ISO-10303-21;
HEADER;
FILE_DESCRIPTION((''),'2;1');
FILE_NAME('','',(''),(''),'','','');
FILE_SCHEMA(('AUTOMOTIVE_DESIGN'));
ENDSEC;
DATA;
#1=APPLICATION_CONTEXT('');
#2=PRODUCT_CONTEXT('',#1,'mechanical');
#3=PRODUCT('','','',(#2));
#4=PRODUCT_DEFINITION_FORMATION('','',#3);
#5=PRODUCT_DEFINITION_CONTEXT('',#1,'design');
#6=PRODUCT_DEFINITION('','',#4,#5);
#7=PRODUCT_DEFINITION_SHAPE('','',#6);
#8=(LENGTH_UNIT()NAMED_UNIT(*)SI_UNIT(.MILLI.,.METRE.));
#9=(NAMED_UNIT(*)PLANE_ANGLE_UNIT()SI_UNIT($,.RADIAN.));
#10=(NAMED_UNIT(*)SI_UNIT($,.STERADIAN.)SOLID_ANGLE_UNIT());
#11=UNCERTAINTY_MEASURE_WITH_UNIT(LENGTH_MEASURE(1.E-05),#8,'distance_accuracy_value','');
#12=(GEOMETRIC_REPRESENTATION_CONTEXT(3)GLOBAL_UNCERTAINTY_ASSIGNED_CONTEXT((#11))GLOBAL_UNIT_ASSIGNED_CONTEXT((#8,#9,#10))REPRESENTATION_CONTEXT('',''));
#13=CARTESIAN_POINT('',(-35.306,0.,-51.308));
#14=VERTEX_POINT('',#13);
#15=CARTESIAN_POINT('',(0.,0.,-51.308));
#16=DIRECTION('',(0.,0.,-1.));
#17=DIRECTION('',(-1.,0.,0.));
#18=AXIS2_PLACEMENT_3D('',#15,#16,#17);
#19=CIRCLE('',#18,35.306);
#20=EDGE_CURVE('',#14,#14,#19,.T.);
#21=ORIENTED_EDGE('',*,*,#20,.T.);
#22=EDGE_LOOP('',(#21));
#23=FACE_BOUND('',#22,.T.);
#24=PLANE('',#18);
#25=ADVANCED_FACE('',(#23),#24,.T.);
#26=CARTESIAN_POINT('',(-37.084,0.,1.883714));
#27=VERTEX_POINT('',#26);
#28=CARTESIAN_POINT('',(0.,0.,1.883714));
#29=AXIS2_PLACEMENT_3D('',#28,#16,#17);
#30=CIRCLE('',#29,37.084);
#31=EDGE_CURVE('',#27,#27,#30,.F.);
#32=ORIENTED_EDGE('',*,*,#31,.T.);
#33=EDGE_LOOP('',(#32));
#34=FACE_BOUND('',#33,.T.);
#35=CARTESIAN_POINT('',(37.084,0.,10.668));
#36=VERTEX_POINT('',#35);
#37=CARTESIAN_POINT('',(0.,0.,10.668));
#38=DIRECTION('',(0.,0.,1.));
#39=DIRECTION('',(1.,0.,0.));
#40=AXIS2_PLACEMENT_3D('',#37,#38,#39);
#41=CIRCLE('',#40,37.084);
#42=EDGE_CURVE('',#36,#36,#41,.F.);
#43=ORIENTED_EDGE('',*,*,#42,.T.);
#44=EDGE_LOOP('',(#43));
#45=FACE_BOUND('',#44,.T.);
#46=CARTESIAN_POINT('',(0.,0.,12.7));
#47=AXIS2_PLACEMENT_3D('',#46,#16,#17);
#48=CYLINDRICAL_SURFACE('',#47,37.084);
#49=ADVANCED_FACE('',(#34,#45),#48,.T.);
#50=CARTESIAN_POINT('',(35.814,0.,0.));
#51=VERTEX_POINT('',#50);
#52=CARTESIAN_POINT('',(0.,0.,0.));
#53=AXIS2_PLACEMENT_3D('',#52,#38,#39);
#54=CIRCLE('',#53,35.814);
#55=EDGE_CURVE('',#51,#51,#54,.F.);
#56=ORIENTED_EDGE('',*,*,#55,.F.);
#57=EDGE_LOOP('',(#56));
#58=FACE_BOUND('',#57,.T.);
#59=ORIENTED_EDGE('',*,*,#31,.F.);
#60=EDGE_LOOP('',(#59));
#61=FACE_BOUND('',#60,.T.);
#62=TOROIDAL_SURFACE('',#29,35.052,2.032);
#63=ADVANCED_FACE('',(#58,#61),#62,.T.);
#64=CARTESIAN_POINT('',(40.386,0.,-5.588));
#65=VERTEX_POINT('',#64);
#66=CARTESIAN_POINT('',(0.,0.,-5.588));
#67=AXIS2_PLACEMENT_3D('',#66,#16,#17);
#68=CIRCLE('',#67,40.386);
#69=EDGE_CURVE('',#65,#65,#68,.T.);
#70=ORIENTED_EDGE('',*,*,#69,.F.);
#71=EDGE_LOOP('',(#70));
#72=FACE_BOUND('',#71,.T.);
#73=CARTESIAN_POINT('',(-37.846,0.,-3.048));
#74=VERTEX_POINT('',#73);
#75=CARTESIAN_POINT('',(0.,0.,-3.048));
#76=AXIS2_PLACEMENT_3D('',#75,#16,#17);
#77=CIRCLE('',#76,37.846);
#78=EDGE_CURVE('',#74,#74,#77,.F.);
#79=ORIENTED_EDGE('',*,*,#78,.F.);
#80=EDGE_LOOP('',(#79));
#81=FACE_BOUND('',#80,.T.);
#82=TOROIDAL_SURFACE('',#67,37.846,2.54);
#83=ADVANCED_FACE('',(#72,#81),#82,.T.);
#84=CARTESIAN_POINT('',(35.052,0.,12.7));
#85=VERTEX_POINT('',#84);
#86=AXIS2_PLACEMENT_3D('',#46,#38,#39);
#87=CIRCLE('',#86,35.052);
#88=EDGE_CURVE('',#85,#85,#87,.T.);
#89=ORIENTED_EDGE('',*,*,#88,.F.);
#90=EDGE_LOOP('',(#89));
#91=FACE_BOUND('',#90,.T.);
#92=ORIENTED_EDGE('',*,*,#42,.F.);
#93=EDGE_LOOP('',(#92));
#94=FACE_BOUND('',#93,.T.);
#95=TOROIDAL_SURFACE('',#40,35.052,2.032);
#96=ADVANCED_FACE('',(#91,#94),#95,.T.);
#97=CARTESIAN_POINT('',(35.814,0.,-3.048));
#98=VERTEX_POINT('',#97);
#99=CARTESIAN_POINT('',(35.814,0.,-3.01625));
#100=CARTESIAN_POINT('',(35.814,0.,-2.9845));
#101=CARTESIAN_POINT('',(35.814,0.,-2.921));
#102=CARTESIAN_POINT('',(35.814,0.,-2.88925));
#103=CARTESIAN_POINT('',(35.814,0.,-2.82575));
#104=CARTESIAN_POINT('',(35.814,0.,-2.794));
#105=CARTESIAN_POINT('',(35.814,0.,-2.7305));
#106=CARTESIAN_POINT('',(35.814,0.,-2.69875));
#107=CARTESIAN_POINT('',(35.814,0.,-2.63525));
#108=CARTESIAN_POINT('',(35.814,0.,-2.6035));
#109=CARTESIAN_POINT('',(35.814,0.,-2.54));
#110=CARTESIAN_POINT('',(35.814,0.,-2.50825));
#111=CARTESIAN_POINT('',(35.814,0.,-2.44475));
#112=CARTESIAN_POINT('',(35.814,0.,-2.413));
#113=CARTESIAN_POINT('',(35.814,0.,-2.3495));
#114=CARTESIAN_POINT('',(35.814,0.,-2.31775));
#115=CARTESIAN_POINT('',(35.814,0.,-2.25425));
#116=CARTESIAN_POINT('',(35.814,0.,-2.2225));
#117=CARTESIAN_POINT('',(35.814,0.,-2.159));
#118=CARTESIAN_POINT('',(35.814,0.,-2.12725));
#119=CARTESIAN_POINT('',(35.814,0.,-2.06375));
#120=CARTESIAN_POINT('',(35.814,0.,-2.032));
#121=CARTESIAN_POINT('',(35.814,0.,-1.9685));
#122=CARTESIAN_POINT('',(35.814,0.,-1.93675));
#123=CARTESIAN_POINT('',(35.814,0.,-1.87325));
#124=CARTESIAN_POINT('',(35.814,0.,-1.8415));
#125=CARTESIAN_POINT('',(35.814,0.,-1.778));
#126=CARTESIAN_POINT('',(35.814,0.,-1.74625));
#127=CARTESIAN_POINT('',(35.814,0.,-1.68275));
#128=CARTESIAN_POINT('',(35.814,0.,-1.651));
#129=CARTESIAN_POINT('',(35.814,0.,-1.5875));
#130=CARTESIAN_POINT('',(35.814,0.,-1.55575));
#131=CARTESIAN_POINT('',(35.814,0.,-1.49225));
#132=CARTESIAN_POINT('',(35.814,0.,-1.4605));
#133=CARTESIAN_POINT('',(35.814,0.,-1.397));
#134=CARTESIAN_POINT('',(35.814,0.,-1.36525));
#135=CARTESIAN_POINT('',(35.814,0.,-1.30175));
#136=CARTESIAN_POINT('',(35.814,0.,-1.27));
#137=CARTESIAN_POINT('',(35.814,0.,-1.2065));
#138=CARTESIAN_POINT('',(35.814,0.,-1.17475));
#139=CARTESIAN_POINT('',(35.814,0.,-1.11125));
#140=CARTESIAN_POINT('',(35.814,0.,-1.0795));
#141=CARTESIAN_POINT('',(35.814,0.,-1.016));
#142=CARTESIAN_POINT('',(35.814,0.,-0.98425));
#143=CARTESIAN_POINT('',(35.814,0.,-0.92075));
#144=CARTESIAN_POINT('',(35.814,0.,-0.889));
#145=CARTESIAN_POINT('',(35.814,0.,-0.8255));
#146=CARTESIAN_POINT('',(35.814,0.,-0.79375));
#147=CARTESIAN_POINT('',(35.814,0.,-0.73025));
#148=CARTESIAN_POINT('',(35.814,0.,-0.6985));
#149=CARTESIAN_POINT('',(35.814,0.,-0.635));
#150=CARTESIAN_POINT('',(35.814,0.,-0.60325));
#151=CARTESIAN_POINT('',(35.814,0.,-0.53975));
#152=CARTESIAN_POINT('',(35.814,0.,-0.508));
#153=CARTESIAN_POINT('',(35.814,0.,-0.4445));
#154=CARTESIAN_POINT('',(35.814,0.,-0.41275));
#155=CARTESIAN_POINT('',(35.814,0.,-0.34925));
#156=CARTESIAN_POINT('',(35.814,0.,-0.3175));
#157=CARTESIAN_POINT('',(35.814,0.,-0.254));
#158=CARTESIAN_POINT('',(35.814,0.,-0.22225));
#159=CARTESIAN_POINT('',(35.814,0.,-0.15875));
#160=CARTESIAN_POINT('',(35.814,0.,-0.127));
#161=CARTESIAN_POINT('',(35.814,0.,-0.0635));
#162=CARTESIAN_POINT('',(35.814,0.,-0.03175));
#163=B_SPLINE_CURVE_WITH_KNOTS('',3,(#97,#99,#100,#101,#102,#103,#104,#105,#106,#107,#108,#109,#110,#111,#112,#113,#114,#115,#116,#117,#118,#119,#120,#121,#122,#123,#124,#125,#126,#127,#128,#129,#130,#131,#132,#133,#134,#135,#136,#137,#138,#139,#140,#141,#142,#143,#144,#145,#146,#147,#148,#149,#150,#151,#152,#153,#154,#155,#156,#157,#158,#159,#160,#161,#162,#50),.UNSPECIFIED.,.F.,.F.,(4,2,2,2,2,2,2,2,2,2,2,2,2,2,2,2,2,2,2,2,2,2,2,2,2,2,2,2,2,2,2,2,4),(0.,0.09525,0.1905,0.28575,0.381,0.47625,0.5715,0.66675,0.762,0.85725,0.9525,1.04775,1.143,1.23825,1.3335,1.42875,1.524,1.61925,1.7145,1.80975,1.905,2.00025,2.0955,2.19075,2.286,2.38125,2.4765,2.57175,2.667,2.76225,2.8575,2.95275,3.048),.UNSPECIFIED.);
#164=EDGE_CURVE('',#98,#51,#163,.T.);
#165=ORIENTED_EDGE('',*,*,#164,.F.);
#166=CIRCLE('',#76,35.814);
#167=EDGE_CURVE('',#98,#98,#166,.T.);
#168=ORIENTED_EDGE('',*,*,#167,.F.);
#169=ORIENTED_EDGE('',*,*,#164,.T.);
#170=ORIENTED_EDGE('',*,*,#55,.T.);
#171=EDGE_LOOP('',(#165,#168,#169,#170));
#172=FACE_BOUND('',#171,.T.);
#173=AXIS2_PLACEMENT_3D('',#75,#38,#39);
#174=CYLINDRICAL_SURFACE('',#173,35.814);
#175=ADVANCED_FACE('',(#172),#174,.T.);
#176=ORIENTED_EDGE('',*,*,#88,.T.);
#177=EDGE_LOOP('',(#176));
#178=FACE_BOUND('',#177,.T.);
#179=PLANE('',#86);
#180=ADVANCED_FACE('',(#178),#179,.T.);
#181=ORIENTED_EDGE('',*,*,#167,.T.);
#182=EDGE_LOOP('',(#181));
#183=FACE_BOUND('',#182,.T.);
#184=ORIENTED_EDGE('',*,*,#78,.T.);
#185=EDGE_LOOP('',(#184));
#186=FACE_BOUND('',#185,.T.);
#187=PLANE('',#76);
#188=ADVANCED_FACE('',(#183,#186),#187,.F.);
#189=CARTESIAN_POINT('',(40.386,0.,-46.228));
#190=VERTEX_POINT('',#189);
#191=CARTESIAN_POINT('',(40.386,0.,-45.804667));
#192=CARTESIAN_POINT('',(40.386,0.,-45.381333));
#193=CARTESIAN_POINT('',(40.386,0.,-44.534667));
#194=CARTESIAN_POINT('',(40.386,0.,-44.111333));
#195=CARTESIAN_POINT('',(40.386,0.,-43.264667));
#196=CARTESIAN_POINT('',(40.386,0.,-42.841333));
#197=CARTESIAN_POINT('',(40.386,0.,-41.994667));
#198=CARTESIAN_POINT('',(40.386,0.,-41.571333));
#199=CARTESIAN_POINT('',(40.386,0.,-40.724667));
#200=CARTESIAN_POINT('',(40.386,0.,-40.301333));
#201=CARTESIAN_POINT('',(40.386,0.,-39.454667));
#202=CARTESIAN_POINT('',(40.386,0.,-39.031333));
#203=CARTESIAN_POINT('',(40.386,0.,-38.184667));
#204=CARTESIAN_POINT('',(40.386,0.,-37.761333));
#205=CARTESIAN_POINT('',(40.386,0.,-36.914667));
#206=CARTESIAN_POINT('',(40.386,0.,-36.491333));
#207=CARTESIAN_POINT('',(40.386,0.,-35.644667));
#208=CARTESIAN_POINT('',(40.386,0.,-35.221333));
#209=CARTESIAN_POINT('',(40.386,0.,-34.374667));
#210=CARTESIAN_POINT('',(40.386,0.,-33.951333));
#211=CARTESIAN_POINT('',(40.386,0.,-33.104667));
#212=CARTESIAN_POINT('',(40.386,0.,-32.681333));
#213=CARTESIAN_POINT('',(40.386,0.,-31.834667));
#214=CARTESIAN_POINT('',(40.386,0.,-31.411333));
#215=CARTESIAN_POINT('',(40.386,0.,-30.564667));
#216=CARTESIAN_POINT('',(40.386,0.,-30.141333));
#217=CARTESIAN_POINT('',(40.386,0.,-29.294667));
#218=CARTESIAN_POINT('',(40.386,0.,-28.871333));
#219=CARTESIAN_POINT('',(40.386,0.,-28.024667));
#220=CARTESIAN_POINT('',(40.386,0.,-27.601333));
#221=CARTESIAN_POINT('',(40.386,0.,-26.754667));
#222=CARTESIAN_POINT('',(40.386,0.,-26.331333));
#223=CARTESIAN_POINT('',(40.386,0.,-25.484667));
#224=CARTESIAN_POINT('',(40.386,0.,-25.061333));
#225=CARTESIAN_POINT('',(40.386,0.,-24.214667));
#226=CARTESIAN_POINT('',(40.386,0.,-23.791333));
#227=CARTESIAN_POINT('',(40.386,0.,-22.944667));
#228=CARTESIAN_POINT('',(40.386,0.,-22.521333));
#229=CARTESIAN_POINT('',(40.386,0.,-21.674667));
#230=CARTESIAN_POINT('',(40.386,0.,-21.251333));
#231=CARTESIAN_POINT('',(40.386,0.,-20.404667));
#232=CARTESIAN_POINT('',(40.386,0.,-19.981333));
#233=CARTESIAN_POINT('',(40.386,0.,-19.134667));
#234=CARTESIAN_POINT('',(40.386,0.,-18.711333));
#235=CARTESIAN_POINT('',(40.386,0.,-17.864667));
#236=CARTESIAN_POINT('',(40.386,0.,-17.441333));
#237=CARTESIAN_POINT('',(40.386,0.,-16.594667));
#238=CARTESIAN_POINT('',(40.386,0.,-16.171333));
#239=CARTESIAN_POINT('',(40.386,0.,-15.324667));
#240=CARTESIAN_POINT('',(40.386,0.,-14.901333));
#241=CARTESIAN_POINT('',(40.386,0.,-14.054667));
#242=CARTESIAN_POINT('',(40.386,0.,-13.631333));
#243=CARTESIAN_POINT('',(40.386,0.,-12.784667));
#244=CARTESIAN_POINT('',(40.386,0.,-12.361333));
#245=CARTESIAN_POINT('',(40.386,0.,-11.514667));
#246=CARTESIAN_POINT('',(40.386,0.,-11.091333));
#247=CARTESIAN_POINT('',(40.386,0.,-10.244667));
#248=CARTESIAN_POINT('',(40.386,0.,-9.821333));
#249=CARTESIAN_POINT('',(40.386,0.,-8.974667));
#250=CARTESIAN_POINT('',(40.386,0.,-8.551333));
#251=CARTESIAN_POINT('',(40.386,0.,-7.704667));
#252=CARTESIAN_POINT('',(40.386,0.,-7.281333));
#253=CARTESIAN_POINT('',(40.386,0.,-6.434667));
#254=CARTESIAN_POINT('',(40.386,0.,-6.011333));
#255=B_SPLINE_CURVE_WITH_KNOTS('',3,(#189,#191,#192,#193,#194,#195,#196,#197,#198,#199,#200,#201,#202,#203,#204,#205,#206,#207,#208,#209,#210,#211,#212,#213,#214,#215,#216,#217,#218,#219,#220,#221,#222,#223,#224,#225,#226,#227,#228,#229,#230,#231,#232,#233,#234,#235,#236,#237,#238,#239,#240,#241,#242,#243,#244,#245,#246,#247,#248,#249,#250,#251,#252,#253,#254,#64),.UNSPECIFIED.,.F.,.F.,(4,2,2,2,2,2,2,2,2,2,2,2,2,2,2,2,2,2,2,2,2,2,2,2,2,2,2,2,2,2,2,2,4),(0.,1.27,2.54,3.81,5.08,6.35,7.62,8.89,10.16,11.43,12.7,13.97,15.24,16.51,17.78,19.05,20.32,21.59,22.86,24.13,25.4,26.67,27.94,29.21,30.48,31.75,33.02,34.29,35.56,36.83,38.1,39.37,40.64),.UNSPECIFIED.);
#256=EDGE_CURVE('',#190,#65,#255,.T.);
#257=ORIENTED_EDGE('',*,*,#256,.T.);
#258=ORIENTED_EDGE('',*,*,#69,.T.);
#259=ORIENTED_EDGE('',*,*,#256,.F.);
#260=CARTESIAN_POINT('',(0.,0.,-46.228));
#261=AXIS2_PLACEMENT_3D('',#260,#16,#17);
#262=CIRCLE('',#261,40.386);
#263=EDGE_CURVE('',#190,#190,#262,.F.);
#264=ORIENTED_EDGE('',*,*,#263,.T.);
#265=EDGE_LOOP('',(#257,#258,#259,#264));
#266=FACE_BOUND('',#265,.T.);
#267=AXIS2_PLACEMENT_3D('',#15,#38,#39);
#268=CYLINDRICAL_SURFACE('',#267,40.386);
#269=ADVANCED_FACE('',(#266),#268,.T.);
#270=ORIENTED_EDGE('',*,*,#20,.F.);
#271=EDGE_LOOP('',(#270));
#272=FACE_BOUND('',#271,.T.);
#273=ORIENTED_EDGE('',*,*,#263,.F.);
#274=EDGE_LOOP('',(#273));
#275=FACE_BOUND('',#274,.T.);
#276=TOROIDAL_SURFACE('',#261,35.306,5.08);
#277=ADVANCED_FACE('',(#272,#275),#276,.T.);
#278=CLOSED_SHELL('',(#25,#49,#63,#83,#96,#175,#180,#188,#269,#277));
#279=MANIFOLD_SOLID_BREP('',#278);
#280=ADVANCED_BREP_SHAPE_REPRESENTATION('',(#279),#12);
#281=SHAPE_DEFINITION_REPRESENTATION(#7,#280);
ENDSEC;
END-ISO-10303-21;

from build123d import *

# Parameters (mm, degrees)
SKETCH1_R           = 37.084
BOSS_EXTRUDE1_DEPTH = 12.7
SKETCH2_R           = 35.814
BOSS_EXTRUDE2_DEPTH = 3.048
SKETCH3_R           = 40.386
BOSS_EXTRUDE3_DEPTH = 48.26
FILLET1_R           = 2.54
FILLET2_R           = 5.08
FILLET3_R           = 2.032


with BuildPart() as part:
    # Sketch1 → Boss-Extrude1 (new body)
    with BuildSketch(Plane.XY):
        Circle(SKETCH1_R)
    extrude(amount=BOSS_EXTRUDE1_DEPTH)

    # Sketch2 → Boss-Extrude2 (add)
    with BuildSketch(Plane(origin=(0, 0, 0), x_dir=(-1, 0, 0), z_dir=(0, 0, -1))):
        with Locations(Location((0, 0, 0), (0, 0, 180))):
            Circle(SKETCH2_R)
    extrude(amount=BOSS_EXTRUDE2_DEPTH)

    # Sketch3 → Boss-Extrude3 (add)
    with BuildSketch(Plane(origin=(0, 0, -3.048), x_dir=(-1, 0, 0), z_dir=(0, 0, -1))):
        with Locations(Location((0, 0, 0), (0, 0, 180))):
            Circle(SKETCH3_R)
    extrude(amount=BOSS_EXTRUDE3_DEPTH)

    # Fillet1
    fillet1_edges = [part.edges().sort_by_distance(p)[0] for p in [
        (-40.386, 0, -3.048),
    ]]
    fillet(fillet1_edges, radius=FILLET1_R)

    # Fillet2
    fillet2_edges = [part.edges().sort_by_distance(p)[0] for p in [
        (-40.386, 0, -51.308),
    ]]
    fillet(fillet2_edges, radius=FILLET2_R)

    # Fillet3
    # the kernel refuses this fillet: 2.032 mm, written as the material it takes off along each edge
    with BuildSketch(Plane(origin=(0, 0, 0), x_dir=(1, 0, 0), z_dir=(0, -1, 0))) as fillet3_piece_1:
        with BuildLine():
            CenterArc((35.052, 1.883714416), FILLET3_R, 292.024312837, 67.975687163)
            Line((37.084, 1.883714416), (37.12464, 1.883714416))
            Line((37.12464, 1.883714416), (37.12464, 0))
            Line((37.12464, 0), (37.084, -0.04064))
            ThreePointArc((37.084, -0.04064), (36.449, -0.04064), (35.82924, -0.037674288))
            Line((35.82924, -0.037674288), (35.814, 0))
        make_face()
    revolve(axis=Axis((0, 0, 0), (0, 0, 1)), mode=Mode.SUBTRACT)
    with BuildSketch(Plane(origin=(0, 0, 12.7), x_dir=(1, 0, 0), z_dir=(0, -1, 0))) as fillet3_piece_2:
        with BuildLine():
            CenterArc((37.084 - FILLET3_R, -FILLET3_R), FILLET3_R, 0, 90)
            Line((37.084 - FILLET3_R, 0), (37.084 - FILLET3_R, FILLET3_R * 0.02))
            Line((37.084 - FILLET3_R, FILLET3_R * 0.02), (37.084 + FILLET3_R * 0.02, FILLET3_R * 0.02))
            Line((37.084 + FILLET3_R * 0.02, FILLET3_R * 0.02), (37.084 + FILLET3_R * 0.02, -FILLET3_R))
            Line((37.084 + FILLET3_R * 0.02, -FILLET3_R), (37.084, -FILLET3_R))
        make_face()
    revolve(axis=Axis((0, 0, 12.7), (0, 0, 1)), mode=Mode.SUBTRACT)


solid = part.part
